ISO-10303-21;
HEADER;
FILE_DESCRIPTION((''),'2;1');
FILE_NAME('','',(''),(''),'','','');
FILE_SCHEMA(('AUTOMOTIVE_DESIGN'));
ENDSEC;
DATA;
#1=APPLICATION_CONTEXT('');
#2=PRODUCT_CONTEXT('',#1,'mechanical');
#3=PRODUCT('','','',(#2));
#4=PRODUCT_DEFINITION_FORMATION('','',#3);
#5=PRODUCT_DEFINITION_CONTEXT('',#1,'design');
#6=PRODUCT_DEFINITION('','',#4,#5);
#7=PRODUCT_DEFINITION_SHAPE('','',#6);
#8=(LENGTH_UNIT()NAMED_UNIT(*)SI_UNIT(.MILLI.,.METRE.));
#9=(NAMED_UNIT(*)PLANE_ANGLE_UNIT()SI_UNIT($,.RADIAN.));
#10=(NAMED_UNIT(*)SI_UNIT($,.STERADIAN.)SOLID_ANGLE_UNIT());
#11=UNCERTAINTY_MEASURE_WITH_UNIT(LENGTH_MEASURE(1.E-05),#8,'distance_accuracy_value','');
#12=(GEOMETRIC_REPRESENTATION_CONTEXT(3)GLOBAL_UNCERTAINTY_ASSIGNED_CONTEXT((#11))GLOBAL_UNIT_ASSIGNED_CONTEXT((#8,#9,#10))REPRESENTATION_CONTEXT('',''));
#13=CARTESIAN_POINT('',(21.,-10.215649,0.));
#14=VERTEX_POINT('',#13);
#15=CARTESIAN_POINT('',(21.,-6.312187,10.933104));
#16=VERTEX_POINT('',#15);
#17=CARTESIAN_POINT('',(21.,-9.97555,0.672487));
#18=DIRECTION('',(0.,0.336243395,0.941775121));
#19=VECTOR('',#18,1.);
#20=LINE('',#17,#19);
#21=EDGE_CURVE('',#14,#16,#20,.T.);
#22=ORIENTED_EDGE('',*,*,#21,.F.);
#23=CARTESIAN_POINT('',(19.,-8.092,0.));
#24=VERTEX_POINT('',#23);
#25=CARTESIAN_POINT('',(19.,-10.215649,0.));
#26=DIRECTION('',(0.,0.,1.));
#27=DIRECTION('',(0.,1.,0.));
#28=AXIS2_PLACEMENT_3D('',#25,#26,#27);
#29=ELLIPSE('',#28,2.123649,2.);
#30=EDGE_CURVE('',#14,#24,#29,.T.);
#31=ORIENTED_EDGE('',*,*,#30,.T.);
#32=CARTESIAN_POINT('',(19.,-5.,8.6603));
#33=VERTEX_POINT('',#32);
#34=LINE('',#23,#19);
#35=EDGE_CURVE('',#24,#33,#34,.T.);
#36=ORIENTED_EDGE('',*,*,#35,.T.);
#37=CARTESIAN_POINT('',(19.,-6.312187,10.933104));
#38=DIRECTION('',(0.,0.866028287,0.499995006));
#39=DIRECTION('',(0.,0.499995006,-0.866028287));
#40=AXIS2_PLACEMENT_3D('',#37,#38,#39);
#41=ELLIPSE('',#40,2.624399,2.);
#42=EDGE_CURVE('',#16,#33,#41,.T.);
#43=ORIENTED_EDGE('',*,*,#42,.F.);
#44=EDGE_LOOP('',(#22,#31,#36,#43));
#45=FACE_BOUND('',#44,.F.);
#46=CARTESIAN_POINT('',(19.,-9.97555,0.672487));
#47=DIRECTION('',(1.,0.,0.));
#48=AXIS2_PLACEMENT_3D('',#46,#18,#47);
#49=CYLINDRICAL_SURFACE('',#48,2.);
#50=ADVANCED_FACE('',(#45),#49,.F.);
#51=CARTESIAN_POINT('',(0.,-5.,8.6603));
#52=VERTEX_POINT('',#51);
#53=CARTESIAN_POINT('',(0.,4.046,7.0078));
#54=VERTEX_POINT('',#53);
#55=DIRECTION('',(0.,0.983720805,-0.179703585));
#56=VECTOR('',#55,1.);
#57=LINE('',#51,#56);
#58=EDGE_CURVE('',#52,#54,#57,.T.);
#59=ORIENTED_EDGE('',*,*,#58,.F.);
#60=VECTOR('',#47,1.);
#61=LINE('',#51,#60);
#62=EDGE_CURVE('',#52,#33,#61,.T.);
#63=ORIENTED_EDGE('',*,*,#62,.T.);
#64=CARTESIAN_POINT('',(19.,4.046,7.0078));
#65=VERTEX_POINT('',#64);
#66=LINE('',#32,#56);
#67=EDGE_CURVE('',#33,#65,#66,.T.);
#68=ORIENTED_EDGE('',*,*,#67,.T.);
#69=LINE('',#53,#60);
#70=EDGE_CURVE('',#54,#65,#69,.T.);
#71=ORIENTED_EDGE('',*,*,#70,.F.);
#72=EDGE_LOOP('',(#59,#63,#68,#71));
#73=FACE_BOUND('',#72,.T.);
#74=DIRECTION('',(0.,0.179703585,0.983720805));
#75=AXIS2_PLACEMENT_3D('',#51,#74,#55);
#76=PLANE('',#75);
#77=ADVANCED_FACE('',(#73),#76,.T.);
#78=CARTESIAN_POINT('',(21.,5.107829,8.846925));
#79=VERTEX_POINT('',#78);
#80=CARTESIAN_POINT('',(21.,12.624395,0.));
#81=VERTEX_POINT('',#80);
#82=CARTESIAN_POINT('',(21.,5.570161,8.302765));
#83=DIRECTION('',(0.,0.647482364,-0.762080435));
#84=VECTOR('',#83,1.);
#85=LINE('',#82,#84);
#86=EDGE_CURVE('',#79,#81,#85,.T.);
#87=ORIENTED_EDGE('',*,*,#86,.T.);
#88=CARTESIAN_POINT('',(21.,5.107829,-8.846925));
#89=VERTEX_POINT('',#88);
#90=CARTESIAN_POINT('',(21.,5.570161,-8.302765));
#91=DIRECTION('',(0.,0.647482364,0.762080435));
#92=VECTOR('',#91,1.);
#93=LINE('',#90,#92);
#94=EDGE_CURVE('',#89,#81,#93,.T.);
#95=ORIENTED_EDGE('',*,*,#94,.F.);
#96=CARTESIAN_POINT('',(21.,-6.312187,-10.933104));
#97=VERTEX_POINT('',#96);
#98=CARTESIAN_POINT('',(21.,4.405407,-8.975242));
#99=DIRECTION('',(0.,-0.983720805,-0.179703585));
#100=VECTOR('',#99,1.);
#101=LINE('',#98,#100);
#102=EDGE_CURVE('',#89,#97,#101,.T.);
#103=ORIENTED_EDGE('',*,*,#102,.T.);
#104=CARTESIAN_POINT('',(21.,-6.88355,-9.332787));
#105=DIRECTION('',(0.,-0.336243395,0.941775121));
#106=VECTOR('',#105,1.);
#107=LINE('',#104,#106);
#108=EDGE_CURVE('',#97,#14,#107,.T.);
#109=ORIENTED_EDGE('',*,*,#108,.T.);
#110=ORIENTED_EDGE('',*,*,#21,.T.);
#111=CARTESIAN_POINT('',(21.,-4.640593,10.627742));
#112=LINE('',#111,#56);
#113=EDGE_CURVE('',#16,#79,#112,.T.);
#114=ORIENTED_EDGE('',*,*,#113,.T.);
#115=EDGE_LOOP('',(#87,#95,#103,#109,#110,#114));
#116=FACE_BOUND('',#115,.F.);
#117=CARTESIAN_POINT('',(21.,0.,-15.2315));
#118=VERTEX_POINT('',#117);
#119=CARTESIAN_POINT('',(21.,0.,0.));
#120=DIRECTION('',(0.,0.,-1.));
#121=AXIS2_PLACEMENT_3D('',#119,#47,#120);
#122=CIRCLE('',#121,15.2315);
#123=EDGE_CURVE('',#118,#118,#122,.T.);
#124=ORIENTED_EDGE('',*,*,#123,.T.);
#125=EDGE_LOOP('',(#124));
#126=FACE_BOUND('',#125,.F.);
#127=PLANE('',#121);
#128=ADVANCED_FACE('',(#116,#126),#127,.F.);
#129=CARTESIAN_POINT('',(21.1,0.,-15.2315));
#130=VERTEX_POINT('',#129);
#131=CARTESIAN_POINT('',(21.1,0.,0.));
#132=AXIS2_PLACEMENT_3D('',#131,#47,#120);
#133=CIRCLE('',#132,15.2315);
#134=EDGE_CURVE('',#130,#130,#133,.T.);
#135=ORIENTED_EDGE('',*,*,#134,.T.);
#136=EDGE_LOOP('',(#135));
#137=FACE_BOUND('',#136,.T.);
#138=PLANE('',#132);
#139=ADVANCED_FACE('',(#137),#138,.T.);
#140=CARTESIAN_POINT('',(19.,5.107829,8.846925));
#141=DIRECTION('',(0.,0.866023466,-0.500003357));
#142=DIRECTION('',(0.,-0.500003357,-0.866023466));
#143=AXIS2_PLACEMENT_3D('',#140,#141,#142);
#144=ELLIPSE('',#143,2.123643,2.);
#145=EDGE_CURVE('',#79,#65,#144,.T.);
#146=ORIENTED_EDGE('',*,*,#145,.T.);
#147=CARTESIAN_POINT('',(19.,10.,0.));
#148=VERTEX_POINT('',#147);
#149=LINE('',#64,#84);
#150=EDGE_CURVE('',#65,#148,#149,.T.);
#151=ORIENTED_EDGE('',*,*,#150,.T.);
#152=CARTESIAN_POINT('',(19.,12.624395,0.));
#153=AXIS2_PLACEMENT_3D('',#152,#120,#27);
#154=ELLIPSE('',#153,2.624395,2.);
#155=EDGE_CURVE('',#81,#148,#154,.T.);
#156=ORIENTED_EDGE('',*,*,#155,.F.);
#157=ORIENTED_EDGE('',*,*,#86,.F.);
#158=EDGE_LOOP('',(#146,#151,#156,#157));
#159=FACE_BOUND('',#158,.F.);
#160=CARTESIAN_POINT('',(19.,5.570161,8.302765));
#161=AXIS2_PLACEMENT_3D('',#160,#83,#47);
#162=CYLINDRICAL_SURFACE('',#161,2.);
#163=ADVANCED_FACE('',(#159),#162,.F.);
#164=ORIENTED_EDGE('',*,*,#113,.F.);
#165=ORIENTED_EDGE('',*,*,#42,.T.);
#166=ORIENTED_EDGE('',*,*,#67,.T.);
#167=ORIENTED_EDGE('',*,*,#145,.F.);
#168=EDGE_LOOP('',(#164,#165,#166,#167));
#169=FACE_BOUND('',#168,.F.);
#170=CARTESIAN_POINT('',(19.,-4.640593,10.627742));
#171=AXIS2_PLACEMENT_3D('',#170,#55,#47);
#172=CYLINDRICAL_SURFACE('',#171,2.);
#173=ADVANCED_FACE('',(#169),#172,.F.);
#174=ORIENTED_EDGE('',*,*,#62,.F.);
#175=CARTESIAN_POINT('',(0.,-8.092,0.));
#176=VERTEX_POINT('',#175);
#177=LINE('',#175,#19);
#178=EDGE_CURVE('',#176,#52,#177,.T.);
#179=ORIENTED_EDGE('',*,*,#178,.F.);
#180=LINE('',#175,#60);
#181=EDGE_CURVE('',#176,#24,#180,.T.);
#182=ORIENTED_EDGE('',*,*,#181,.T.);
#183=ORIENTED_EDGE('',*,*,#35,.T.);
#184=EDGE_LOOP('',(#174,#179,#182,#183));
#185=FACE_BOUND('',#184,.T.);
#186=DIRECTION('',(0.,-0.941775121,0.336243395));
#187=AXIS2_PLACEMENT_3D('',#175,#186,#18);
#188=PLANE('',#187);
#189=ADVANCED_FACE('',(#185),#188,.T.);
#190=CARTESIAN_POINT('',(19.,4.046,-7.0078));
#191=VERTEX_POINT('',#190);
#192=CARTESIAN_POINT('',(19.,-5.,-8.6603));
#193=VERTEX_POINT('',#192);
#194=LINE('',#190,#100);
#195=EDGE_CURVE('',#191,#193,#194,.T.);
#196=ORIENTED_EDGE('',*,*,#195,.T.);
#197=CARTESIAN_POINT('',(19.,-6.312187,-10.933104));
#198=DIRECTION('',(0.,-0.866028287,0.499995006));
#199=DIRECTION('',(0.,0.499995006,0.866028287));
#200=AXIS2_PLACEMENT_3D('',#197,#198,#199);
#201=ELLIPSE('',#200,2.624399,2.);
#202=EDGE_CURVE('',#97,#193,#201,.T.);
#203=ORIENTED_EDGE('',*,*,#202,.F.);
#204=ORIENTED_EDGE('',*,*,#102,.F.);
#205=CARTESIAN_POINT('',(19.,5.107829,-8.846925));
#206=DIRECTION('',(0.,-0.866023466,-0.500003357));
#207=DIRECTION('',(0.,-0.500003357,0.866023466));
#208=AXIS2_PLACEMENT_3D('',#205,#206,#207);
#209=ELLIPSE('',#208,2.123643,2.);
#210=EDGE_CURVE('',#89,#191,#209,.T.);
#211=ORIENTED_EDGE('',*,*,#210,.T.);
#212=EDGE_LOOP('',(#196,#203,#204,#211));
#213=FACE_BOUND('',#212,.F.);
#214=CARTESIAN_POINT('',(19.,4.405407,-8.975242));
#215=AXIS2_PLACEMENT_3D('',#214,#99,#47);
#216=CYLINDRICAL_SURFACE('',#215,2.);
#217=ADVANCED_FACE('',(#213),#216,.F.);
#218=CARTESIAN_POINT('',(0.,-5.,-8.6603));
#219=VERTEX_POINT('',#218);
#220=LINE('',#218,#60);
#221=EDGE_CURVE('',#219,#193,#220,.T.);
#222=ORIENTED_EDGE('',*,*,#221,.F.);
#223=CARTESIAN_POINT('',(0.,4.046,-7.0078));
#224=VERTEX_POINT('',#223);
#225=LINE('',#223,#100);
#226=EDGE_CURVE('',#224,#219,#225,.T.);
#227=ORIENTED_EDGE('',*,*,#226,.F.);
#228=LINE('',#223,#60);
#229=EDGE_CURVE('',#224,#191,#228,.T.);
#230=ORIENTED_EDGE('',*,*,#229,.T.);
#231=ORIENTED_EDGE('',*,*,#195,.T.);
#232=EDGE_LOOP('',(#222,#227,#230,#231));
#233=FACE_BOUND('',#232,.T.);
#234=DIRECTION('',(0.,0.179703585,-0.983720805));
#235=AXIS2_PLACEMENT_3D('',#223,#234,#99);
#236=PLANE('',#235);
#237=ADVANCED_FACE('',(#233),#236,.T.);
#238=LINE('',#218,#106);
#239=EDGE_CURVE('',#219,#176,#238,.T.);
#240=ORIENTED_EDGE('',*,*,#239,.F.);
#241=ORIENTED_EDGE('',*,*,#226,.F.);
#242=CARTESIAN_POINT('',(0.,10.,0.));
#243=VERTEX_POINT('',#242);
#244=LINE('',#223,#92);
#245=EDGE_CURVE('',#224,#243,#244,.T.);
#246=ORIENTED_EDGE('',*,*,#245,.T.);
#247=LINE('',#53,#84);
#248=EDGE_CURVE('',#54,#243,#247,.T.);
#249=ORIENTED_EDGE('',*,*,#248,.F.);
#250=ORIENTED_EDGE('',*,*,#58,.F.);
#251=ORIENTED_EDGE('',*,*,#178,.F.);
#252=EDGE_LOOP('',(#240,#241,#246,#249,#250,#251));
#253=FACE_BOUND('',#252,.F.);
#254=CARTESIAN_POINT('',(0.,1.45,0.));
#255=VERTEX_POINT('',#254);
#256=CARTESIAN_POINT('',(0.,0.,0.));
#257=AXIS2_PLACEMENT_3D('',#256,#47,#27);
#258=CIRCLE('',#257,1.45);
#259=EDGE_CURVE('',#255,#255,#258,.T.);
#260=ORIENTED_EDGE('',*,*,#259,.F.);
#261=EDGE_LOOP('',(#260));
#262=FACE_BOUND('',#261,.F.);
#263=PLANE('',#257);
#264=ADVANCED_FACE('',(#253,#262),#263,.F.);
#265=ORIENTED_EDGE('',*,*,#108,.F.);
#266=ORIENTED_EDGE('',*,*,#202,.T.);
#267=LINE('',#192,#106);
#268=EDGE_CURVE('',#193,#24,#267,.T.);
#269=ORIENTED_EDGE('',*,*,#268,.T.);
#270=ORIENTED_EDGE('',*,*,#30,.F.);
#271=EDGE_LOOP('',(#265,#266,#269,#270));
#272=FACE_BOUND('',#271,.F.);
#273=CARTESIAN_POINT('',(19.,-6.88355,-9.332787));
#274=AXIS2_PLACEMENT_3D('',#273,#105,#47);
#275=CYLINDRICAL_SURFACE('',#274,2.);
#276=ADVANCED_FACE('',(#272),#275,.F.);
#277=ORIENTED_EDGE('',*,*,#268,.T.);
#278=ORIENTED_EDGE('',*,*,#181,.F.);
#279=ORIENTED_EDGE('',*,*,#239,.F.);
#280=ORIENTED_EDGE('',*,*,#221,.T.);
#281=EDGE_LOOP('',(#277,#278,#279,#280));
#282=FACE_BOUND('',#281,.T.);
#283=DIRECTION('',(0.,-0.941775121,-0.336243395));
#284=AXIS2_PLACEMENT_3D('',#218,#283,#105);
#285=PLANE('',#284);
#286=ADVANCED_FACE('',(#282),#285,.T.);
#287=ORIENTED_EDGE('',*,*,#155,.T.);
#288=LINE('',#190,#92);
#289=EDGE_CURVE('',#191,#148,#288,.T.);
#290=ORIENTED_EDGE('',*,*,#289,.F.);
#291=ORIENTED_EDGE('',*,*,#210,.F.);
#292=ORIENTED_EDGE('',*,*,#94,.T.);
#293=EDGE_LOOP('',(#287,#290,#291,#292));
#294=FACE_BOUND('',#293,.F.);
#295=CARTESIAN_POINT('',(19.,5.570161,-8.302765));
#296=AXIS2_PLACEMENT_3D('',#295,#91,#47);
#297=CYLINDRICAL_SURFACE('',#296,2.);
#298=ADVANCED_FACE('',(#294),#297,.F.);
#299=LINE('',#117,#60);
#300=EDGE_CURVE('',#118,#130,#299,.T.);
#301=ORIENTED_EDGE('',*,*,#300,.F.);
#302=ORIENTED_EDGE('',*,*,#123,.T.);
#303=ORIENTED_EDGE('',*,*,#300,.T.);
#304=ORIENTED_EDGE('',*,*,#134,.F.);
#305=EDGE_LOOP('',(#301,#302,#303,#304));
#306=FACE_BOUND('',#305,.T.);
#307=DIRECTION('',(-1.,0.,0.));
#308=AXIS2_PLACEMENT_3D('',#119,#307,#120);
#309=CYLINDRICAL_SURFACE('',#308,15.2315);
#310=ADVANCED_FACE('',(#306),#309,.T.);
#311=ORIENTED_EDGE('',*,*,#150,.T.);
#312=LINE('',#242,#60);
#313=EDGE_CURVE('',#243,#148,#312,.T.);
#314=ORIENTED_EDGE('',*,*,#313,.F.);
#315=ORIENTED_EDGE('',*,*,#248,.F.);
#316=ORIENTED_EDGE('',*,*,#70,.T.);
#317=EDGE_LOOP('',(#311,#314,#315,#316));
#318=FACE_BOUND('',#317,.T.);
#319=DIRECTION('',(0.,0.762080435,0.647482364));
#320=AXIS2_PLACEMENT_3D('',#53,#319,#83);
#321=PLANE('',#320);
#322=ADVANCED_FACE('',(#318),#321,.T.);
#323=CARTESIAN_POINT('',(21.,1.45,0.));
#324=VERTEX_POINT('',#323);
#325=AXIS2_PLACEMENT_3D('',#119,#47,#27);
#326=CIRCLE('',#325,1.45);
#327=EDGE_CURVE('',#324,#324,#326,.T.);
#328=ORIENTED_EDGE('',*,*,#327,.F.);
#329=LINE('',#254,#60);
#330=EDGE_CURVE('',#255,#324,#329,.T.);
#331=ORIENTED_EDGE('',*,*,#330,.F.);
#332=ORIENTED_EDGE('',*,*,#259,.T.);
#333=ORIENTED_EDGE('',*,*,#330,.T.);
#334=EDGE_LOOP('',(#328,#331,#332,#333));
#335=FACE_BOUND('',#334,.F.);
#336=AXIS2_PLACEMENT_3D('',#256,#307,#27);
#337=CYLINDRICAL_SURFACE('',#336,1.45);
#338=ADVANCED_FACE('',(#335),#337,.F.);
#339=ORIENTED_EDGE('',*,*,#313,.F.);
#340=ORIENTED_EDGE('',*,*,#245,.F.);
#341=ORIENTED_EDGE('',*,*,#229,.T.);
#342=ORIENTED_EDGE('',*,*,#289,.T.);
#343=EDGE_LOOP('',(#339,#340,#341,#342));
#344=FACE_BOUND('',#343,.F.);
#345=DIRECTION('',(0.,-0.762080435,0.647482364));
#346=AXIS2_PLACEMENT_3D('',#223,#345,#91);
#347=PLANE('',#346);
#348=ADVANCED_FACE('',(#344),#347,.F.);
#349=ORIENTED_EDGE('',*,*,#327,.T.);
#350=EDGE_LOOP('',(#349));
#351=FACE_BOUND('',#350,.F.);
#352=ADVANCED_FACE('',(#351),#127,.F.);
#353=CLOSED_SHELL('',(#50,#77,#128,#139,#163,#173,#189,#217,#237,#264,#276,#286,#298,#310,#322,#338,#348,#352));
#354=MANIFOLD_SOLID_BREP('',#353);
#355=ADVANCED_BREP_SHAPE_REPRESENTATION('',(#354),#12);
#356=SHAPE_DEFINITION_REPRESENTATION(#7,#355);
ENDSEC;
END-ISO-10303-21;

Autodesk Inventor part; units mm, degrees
ref_plane "YZ Plane" through (0, 0, 0) normal (1, 0, 0) x (0, 1, 0)
ref_plane "XZ Plane" through (0, 0, 0) normal (0, 1, 0) x (-1, 0, 0)
ref_plane "XY Plane" through (0, 0, 0) normal (0, 0, 1) x (1, 0, 0)
sketch "Block1" plane through (0, 0, 0) normal (0, 0, 1) x (1, 0, 0)
  line L0 (4.046, 7.0078) -> (10, 0)
  line L1 (4.046, -7.0078) -> (10, 0)
  line L2 (4.046, -7.0078) -> (-5, -8.6603)
  line L3 (-5, -8.6603) -> (-8.092, 0)
  line L4 (-8.092, 0) -> (-5, 8.6603)
  line L5 (-5, 8.6603) -> (4.046, 7.0078)
  point P0 (0, 0)
sketch "Sketch1" plane through (0, 0, 0) normal (1, 0, 0) x (0, 1, 0)
  circle A0 centre (0, 0) radius 1.45
  line L0 (4.046, 7.0078) -> (10, 0)
  line L1 (4.046, -7.0078) -> (10, 0)
  line L2 (4.046, -7.0078) -> (-5, -8.6603)
  line L3 (-5, -8.6603) -> (-8.092, 0)
  line L4 (-8.092, 0) -> (-5, 8.6603)
  line L5 (-5, 8.6603) -> (4.046, 7.0078)
  point P0 (-0.5025, 0)
  point P1 (-0.5025, 0)
  dimension "d3" = 2.9
extrude "Extrusion1" add sketch "Sketch1" along normal blind 21
sketch "Sketch2" plane through (21, 0, 0) normal (1, 0, 0) x (0, 0, -1)
  circle A0 centre (0, 0) radius 15.2315
extrude "Extrusion2" add sketch "Sketch2" along normal blind 0.1
fillet "Fillet1" radius 2 6 edges at (21, 7.023, -3.5039) (21, 7.023, 3.5039) (21, -0.477, 7.834) (21, -6.546, 4.3301) (21, -6.546, -4.3301) (21, -0.477, -7.834)
properties part number "eje motor"
